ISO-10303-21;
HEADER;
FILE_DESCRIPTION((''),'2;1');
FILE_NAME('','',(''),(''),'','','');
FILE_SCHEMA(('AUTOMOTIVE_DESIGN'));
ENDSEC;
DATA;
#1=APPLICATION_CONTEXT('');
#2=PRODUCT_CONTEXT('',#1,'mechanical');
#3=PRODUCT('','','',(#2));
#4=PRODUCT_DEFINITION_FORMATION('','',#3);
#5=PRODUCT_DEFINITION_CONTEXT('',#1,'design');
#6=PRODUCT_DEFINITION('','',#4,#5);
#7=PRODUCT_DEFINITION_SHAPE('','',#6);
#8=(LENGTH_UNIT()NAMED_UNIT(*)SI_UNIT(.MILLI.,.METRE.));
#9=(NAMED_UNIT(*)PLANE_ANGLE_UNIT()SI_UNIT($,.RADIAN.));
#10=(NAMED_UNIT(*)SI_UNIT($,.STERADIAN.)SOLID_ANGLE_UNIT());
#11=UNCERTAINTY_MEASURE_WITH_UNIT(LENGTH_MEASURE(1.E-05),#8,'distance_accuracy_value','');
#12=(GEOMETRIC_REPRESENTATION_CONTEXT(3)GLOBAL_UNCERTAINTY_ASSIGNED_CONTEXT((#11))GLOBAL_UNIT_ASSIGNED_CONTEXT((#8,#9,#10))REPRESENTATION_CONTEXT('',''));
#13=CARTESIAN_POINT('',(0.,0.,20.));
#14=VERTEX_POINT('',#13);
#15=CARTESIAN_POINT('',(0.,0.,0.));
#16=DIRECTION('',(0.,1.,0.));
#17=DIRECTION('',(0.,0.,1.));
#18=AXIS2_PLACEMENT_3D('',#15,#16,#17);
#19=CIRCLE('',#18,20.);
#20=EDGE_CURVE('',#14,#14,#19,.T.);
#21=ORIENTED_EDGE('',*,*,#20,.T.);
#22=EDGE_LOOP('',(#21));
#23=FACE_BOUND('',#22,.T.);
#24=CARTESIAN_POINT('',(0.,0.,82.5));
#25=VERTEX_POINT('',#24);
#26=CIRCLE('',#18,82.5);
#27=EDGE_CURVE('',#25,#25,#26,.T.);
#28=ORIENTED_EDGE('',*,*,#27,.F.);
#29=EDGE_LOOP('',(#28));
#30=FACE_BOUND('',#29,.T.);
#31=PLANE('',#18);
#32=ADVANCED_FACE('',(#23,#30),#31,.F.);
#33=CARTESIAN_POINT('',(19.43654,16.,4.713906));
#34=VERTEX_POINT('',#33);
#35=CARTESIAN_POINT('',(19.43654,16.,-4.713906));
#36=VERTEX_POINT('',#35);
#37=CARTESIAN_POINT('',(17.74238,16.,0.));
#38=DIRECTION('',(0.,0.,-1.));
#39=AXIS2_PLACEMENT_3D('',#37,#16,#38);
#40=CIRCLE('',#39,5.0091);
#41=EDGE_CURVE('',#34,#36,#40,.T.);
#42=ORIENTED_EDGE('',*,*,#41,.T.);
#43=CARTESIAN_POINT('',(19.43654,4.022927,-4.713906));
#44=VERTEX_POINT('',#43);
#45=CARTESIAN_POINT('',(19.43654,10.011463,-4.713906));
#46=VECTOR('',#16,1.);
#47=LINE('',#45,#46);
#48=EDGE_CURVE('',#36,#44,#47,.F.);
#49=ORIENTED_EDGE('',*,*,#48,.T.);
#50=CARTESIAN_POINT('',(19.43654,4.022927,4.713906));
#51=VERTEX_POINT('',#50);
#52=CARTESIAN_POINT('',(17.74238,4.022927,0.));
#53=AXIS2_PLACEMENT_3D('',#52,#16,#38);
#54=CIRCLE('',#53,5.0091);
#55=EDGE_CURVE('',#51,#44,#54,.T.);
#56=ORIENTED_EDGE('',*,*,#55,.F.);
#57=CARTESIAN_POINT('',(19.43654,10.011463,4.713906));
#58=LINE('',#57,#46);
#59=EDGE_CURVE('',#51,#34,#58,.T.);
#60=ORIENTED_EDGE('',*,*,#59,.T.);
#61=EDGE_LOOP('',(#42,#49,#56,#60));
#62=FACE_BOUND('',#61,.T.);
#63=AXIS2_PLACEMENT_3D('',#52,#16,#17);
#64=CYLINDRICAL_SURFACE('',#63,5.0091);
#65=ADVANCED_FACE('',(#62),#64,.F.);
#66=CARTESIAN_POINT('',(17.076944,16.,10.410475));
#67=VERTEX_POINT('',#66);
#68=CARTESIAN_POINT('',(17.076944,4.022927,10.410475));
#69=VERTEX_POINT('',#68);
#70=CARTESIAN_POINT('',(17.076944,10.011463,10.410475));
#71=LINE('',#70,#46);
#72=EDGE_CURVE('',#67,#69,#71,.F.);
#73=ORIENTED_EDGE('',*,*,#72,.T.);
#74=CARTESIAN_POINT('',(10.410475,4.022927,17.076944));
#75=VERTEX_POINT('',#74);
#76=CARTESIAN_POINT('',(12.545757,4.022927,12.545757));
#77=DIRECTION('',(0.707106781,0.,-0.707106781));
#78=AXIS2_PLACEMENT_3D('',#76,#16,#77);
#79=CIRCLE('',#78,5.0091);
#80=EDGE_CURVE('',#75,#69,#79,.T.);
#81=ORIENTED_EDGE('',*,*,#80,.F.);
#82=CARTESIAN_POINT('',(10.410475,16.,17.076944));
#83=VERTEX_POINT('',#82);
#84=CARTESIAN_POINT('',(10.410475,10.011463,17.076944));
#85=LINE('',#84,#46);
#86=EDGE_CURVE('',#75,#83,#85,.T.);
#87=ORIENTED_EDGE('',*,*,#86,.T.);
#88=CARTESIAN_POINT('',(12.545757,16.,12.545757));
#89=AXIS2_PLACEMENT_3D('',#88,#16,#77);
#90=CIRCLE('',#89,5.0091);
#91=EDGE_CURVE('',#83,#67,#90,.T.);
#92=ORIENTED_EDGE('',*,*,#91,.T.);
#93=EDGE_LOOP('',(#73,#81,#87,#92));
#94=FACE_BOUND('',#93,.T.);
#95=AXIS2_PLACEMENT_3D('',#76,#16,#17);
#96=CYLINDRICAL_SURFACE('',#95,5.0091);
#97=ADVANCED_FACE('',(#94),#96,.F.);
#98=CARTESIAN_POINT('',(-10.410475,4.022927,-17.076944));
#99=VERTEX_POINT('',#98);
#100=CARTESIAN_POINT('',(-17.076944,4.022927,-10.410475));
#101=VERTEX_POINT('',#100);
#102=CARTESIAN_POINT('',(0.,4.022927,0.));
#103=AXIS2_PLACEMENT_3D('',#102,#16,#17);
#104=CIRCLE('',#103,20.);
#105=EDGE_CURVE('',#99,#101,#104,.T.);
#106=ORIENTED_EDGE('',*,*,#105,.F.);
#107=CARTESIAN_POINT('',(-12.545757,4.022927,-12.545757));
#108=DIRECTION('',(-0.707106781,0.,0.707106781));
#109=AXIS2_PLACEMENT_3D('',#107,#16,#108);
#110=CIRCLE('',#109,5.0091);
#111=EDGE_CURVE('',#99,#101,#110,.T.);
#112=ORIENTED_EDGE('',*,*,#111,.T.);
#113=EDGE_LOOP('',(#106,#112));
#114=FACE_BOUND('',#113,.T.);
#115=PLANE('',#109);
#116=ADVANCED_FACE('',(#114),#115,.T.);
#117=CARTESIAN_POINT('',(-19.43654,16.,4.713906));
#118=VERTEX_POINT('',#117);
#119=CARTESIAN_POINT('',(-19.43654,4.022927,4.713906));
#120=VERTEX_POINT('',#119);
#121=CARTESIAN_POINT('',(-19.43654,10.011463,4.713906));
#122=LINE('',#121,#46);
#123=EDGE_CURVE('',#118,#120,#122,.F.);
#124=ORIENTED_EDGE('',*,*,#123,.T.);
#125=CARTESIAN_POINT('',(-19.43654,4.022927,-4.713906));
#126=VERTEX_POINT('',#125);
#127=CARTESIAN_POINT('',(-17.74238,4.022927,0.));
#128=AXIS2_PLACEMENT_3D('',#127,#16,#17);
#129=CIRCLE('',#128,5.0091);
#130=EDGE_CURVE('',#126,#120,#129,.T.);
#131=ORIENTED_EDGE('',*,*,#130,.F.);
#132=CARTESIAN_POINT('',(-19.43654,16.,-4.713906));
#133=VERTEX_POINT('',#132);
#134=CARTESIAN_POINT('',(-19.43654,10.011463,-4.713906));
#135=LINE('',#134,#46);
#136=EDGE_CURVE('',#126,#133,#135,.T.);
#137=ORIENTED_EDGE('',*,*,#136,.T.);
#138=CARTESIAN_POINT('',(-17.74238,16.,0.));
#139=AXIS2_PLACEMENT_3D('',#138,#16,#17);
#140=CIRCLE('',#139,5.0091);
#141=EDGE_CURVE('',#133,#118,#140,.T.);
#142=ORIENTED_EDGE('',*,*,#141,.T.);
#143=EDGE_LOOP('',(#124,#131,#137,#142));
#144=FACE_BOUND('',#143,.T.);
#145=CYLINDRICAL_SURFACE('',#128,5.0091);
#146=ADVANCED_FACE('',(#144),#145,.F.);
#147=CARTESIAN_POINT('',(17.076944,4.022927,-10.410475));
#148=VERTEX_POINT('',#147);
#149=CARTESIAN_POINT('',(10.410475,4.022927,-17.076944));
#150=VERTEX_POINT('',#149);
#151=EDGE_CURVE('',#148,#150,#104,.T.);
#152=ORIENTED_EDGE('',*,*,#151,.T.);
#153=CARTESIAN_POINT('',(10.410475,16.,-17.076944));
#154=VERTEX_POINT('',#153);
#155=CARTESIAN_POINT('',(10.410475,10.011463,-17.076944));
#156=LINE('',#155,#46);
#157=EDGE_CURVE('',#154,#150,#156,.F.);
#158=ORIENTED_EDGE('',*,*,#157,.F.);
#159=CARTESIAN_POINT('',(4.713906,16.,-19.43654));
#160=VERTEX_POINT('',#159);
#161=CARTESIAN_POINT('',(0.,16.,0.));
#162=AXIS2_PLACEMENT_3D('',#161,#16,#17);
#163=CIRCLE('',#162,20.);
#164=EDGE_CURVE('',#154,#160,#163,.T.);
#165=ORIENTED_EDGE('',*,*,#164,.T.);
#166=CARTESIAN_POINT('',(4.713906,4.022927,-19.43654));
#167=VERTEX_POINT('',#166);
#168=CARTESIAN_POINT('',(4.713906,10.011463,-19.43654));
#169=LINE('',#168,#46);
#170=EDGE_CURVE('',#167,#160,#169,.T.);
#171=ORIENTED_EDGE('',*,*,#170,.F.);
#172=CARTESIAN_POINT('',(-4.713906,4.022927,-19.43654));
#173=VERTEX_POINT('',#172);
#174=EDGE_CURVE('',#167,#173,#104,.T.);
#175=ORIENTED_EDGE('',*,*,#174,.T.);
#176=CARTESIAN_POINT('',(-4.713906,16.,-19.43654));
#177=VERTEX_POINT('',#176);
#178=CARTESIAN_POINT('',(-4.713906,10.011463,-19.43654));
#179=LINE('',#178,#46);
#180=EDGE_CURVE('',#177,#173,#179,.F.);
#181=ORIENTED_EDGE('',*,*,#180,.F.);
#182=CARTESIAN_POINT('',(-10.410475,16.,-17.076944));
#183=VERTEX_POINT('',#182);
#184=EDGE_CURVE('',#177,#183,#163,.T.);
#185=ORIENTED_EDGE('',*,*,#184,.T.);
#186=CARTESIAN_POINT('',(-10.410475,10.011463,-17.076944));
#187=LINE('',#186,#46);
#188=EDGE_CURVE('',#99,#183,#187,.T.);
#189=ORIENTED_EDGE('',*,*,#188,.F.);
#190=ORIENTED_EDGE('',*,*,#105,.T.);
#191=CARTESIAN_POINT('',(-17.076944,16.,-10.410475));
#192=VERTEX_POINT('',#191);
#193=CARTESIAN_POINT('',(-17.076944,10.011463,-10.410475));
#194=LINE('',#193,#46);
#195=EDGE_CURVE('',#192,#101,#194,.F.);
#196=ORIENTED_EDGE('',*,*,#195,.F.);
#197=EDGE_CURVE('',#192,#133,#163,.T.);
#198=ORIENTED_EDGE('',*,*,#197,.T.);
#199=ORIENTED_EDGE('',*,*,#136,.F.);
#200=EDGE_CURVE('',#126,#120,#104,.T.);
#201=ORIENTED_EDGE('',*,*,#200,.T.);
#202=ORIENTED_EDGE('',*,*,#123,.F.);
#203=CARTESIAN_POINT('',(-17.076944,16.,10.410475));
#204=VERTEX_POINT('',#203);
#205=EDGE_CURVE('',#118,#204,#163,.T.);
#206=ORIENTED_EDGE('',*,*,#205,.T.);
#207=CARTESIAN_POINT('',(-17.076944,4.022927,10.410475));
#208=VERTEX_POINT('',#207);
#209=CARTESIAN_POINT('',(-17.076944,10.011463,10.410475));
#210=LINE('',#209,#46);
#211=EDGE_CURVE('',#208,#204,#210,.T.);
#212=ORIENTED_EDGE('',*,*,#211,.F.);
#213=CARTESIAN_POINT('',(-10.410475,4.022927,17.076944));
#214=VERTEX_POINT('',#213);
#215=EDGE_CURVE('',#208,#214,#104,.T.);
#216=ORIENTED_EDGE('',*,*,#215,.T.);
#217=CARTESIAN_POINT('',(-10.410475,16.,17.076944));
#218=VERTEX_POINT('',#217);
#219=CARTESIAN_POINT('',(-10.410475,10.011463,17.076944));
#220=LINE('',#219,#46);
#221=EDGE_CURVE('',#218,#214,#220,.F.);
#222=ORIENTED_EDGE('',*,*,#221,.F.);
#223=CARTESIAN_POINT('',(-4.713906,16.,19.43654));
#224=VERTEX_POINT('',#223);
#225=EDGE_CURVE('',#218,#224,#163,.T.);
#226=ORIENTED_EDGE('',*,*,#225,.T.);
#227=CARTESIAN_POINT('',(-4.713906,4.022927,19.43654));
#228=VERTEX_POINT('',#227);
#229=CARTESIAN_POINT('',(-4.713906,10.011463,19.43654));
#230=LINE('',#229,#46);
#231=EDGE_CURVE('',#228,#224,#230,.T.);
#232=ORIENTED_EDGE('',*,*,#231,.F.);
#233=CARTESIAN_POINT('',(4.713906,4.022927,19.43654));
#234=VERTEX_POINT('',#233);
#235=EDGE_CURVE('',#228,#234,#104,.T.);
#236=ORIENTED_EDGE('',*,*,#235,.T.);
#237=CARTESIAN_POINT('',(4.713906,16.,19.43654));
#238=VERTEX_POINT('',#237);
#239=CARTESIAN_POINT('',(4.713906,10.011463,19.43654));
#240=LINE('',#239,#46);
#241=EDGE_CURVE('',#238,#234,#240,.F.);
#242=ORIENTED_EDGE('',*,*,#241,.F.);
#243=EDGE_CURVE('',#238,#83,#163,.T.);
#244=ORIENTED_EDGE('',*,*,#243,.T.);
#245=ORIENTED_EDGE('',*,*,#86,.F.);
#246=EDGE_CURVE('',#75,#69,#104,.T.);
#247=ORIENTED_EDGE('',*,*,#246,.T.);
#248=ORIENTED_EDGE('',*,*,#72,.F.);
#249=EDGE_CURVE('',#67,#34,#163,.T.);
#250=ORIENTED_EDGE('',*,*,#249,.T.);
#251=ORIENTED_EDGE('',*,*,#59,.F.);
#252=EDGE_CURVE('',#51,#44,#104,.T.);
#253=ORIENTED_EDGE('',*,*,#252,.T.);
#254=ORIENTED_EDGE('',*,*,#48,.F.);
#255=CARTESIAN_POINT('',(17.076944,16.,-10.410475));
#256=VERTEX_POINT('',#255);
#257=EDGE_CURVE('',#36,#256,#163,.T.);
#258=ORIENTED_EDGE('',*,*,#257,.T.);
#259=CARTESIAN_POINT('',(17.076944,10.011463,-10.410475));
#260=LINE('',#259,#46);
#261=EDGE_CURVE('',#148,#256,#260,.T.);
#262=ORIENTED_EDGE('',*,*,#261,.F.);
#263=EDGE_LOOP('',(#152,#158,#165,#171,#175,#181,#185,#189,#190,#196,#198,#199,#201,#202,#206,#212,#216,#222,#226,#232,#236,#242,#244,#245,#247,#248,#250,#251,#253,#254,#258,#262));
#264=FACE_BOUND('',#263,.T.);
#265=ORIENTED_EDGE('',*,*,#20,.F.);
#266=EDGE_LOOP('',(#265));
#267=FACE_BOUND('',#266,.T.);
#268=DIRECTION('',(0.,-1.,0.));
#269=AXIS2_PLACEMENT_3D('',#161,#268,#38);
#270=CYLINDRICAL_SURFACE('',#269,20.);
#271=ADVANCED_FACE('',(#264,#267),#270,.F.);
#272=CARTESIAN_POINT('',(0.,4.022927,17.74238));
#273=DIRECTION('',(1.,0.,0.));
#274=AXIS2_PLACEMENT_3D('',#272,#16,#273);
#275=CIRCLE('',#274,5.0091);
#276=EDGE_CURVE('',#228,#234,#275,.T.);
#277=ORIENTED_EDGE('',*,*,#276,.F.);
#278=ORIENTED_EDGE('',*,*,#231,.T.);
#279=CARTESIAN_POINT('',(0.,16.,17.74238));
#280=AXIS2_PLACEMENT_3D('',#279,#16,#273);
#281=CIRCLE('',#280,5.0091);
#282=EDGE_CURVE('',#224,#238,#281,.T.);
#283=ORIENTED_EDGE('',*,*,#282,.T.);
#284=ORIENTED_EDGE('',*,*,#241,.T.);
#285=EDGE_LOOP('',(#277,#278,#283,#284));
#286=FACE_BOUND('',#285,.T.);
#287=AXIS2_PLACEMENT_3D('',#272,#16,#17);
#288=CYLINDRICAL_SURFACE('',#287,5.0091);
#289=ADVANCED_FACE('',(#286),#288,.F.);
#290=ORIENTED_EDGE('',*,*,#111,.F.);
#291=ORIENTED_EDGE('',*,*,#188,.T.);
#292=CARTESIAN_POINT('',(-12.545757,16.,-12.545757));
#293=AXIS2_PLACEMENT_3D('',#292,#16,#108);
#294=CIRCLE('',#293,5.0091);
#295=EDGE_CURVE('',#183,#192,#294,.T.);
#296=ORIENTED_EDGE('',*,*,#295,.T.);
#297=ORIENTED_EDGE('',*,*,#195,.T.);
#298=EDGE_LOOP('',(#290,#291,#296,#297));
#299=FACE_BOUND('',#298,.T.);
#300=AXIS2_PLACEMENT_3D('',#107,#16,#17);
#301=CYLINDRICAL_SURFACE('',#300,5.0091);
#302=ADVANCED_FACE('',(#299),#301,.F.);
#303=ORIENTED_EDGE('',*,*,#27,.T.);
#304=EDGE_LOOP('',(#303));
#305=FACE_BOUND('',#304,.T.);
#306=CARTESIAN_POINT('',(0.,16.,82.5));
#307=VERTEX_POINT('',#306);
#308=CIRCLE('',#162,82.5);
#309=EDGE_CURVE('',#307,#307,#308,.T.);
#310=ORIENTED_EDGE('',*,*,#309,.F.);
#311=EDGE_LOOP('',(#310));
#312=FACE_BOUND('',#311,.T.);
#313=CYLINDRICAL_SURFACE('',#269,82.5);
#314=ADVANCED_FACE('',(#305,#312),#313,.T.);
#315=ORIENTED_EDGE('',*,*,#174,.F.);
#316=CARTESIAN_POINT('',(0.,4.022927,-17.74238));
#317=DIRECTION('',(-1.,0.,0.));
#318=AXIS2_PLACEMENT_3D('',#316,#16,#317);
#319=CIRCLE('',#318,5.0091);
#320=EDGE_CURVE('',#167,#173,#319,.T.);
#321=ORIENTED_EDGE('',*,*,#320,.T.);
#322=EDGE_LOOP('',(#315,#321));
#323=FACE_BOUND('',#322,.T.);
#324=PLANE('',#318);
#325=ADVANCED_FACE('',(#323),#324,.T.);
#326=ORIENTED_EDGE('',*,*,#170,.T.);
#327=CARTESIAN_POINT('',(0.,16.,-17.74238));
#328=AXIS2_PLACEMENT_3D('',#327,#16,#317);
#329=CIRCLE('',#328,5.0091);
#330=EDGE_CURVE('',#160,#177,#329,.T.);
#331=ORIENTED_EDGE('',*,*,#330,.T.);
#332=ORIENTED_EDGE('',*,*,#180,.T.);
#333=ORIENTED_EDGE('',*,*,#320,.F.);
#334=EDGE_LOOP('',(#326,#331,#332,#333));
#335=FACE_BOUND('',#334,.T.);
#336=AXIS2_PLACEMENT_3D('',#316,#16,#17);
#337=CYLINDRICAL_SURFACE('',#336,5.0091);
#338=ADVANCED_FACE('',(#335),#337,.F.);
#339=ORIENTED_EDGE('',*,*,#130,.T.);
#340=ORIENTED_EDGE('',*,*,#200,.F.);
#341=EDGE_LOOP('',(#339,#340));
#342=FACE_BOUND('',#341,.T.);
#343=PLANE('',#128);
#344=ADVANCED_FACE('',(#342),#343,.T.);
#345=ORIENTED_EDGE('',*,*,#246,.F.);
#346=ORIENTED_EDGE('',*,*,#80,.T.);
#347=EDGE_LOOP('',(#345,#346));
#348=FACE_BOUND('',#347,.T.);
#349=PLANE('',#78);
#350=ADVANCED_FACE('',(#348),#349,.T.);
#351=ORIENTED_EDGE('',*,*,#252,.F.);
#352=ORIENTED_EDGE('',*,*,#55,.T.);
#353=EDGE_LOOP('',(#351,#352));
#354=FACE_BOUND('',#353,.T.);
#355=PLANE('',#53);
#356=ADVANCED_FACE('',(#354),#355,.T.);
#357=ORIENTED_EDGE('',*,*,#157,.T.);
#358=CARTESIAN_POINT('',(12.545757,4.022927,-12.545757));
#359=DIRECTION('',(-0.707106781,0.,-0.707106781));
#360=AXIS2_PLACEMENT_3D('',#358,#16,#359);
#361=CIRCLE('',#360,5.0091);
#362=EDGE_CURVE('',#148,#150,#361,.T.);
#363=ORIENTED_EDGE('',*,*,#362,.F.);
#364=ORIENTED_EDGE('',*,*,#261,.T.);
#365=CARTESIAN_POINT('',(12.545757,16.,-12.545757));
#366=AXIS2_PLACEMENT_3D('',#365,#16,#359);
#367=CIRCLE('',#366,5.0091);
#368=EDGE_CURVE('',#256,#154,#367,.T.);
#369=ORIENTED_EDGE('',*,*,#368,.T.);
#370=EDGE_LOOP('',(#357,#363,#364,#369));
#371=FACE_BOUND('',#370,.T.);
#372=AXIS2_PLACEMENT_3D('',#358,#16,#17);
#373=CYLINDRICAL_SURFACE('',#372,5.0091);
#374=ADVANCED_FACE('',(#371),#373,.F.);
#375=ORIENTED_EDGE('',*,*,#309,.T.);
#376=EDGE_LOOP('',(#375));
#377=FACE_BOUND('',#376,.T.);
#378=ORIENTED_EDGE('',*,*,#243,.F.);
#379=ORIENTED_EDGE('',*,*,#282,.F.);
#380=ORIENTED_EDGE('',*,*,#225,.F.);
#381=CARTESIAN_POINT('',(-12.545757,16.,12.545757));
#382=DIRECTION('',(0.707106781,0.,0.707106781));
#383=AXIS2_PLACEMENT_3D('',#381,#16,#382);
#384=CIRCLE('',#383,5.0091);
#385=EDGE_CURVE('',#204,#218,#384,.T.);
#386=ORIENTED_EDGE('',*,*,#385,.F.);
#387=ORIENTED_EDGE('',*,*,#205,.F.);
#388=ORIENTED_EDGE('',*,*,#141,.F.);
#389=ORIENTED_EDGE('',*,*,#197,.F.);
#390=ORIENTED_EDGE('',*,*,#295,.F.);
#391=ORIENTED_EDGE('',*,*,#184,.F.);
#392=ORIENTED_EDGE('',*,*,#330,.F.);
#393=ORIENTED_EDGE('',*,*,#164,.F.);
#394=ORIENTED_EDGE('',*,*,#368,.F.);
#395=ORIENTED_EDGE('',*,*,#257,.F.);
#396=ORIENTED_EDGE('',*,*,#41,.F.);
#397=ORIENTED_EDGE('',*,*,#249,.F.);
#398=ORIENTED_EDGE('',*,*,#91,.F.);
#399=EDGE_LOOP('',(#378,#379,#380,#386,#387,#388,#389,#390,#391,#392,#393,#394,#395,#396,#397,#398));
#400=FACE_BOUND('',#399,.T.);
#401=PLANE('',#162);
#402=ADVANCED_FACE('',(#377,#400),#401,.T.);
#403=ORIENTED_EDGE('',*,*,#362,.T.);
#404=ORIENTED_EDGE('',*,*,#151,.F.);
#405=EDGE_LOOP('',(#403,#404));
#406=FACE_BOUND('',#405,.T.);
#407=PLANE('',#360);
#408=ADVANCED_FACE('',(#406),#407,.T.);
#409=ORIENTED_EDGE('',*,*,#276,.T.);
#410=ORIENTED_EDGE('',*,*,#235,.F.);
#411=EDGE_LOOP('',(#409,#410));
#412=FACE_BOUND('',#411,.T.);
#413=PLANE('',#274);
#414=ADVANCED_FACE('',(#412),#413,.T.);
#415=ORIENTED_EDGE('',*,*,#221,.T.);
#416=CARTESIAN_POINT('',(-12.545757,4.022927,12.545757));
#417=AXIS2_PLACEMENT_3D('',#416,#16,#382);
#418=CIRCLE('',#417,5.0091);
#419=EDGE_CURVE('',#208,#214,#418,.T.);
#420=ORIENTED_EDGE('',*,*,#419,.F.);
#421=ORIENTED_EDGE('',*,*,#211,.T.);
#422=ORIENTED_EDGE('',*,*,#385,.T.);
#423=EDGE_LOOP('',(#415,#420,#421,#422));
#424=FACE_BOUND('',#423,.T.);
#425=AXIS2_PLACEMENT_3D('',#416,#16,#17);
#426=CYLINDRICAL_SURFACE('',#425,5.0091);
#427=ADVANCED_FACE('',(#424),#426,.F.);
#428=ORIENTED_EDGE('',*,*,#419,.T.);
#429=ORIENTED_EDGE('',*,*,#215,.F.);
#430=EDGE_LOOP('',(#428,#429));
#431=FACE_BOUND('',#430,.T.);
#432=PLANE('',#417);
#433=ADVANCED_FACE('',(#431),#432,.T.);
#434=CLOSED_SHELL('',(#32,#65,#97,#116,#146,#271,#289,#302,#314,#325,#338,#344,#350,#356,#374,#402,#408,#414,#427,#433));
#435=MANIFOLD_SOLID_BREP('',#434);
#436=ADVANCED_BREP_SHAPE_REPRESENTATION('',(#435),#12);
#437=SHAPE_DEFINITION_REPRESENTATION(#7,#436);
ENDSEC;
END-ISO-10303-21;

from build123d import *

# Parameters (mm, degrees)
SKETCH1_R           = 82.5
BOSS_EXTRUDE1_DEPTH = 16
SKETCH2_R           = 20
CUT_EXTRUDE1_DEPTH  = 118.764595698
SKETCH3_R           = 5.009100425
CUT_EXTRUDE2_DEPTH  = 11.977073373
CIRPATTERN1_COUNT   = 8


with BuildPart() as part:
    # Sketch1 → Boss-Extrude1 (new body)
    with BuildSketch(Plane(origin=(0, 0, 0), x_dir=(1, 0, 0), z_dir=(0, 1, 0))):
        Circle(SKETCH1_R)
    extrude(amount=BOSS_EXTRUDE1_DEPTH)

    # Sketch2 → Cut-Extrude1 (cut, through all)
    with BuildSketch(Plane(origin=(0, 0, 0), x_dir=(1, 0, 0), z_dir=(0, 1, 0))):
        Circle(SKETCH2_R)
    extrude(amount=CUT_EXTRUDE1_DEPTH, mode=Mode.SUBTRACT)

    # Sketch3 → Cut-Extrude2 (cut)
    with BuildSketch(Plane(origin=(0, 16, 0), x_dir=(1, 0, 0), z_dir=(0, 1, 0))):
        with Locations((-17.742379925, 0)):
            Circle(SKETCH3_R)
    cut_extrude2 = extrude(amount=-CUT_EXTRUDE2_DEPTH, mode=Mode.SUBTRACT)

    # CirPattern1: Cut-Extrude2 ×8 about axis
    cirpattern1_axis = Axis((0, 0, 0), (0, 1, 0))
    for i in range(1, CIRPATTERN1_COUNT):
        add(cut_extrude2.rotate(cirpattern1_axis, i * 360 / CIRPATTERN1_COUNT), mode=Mode.SUBTRACT)


solid = part.part
